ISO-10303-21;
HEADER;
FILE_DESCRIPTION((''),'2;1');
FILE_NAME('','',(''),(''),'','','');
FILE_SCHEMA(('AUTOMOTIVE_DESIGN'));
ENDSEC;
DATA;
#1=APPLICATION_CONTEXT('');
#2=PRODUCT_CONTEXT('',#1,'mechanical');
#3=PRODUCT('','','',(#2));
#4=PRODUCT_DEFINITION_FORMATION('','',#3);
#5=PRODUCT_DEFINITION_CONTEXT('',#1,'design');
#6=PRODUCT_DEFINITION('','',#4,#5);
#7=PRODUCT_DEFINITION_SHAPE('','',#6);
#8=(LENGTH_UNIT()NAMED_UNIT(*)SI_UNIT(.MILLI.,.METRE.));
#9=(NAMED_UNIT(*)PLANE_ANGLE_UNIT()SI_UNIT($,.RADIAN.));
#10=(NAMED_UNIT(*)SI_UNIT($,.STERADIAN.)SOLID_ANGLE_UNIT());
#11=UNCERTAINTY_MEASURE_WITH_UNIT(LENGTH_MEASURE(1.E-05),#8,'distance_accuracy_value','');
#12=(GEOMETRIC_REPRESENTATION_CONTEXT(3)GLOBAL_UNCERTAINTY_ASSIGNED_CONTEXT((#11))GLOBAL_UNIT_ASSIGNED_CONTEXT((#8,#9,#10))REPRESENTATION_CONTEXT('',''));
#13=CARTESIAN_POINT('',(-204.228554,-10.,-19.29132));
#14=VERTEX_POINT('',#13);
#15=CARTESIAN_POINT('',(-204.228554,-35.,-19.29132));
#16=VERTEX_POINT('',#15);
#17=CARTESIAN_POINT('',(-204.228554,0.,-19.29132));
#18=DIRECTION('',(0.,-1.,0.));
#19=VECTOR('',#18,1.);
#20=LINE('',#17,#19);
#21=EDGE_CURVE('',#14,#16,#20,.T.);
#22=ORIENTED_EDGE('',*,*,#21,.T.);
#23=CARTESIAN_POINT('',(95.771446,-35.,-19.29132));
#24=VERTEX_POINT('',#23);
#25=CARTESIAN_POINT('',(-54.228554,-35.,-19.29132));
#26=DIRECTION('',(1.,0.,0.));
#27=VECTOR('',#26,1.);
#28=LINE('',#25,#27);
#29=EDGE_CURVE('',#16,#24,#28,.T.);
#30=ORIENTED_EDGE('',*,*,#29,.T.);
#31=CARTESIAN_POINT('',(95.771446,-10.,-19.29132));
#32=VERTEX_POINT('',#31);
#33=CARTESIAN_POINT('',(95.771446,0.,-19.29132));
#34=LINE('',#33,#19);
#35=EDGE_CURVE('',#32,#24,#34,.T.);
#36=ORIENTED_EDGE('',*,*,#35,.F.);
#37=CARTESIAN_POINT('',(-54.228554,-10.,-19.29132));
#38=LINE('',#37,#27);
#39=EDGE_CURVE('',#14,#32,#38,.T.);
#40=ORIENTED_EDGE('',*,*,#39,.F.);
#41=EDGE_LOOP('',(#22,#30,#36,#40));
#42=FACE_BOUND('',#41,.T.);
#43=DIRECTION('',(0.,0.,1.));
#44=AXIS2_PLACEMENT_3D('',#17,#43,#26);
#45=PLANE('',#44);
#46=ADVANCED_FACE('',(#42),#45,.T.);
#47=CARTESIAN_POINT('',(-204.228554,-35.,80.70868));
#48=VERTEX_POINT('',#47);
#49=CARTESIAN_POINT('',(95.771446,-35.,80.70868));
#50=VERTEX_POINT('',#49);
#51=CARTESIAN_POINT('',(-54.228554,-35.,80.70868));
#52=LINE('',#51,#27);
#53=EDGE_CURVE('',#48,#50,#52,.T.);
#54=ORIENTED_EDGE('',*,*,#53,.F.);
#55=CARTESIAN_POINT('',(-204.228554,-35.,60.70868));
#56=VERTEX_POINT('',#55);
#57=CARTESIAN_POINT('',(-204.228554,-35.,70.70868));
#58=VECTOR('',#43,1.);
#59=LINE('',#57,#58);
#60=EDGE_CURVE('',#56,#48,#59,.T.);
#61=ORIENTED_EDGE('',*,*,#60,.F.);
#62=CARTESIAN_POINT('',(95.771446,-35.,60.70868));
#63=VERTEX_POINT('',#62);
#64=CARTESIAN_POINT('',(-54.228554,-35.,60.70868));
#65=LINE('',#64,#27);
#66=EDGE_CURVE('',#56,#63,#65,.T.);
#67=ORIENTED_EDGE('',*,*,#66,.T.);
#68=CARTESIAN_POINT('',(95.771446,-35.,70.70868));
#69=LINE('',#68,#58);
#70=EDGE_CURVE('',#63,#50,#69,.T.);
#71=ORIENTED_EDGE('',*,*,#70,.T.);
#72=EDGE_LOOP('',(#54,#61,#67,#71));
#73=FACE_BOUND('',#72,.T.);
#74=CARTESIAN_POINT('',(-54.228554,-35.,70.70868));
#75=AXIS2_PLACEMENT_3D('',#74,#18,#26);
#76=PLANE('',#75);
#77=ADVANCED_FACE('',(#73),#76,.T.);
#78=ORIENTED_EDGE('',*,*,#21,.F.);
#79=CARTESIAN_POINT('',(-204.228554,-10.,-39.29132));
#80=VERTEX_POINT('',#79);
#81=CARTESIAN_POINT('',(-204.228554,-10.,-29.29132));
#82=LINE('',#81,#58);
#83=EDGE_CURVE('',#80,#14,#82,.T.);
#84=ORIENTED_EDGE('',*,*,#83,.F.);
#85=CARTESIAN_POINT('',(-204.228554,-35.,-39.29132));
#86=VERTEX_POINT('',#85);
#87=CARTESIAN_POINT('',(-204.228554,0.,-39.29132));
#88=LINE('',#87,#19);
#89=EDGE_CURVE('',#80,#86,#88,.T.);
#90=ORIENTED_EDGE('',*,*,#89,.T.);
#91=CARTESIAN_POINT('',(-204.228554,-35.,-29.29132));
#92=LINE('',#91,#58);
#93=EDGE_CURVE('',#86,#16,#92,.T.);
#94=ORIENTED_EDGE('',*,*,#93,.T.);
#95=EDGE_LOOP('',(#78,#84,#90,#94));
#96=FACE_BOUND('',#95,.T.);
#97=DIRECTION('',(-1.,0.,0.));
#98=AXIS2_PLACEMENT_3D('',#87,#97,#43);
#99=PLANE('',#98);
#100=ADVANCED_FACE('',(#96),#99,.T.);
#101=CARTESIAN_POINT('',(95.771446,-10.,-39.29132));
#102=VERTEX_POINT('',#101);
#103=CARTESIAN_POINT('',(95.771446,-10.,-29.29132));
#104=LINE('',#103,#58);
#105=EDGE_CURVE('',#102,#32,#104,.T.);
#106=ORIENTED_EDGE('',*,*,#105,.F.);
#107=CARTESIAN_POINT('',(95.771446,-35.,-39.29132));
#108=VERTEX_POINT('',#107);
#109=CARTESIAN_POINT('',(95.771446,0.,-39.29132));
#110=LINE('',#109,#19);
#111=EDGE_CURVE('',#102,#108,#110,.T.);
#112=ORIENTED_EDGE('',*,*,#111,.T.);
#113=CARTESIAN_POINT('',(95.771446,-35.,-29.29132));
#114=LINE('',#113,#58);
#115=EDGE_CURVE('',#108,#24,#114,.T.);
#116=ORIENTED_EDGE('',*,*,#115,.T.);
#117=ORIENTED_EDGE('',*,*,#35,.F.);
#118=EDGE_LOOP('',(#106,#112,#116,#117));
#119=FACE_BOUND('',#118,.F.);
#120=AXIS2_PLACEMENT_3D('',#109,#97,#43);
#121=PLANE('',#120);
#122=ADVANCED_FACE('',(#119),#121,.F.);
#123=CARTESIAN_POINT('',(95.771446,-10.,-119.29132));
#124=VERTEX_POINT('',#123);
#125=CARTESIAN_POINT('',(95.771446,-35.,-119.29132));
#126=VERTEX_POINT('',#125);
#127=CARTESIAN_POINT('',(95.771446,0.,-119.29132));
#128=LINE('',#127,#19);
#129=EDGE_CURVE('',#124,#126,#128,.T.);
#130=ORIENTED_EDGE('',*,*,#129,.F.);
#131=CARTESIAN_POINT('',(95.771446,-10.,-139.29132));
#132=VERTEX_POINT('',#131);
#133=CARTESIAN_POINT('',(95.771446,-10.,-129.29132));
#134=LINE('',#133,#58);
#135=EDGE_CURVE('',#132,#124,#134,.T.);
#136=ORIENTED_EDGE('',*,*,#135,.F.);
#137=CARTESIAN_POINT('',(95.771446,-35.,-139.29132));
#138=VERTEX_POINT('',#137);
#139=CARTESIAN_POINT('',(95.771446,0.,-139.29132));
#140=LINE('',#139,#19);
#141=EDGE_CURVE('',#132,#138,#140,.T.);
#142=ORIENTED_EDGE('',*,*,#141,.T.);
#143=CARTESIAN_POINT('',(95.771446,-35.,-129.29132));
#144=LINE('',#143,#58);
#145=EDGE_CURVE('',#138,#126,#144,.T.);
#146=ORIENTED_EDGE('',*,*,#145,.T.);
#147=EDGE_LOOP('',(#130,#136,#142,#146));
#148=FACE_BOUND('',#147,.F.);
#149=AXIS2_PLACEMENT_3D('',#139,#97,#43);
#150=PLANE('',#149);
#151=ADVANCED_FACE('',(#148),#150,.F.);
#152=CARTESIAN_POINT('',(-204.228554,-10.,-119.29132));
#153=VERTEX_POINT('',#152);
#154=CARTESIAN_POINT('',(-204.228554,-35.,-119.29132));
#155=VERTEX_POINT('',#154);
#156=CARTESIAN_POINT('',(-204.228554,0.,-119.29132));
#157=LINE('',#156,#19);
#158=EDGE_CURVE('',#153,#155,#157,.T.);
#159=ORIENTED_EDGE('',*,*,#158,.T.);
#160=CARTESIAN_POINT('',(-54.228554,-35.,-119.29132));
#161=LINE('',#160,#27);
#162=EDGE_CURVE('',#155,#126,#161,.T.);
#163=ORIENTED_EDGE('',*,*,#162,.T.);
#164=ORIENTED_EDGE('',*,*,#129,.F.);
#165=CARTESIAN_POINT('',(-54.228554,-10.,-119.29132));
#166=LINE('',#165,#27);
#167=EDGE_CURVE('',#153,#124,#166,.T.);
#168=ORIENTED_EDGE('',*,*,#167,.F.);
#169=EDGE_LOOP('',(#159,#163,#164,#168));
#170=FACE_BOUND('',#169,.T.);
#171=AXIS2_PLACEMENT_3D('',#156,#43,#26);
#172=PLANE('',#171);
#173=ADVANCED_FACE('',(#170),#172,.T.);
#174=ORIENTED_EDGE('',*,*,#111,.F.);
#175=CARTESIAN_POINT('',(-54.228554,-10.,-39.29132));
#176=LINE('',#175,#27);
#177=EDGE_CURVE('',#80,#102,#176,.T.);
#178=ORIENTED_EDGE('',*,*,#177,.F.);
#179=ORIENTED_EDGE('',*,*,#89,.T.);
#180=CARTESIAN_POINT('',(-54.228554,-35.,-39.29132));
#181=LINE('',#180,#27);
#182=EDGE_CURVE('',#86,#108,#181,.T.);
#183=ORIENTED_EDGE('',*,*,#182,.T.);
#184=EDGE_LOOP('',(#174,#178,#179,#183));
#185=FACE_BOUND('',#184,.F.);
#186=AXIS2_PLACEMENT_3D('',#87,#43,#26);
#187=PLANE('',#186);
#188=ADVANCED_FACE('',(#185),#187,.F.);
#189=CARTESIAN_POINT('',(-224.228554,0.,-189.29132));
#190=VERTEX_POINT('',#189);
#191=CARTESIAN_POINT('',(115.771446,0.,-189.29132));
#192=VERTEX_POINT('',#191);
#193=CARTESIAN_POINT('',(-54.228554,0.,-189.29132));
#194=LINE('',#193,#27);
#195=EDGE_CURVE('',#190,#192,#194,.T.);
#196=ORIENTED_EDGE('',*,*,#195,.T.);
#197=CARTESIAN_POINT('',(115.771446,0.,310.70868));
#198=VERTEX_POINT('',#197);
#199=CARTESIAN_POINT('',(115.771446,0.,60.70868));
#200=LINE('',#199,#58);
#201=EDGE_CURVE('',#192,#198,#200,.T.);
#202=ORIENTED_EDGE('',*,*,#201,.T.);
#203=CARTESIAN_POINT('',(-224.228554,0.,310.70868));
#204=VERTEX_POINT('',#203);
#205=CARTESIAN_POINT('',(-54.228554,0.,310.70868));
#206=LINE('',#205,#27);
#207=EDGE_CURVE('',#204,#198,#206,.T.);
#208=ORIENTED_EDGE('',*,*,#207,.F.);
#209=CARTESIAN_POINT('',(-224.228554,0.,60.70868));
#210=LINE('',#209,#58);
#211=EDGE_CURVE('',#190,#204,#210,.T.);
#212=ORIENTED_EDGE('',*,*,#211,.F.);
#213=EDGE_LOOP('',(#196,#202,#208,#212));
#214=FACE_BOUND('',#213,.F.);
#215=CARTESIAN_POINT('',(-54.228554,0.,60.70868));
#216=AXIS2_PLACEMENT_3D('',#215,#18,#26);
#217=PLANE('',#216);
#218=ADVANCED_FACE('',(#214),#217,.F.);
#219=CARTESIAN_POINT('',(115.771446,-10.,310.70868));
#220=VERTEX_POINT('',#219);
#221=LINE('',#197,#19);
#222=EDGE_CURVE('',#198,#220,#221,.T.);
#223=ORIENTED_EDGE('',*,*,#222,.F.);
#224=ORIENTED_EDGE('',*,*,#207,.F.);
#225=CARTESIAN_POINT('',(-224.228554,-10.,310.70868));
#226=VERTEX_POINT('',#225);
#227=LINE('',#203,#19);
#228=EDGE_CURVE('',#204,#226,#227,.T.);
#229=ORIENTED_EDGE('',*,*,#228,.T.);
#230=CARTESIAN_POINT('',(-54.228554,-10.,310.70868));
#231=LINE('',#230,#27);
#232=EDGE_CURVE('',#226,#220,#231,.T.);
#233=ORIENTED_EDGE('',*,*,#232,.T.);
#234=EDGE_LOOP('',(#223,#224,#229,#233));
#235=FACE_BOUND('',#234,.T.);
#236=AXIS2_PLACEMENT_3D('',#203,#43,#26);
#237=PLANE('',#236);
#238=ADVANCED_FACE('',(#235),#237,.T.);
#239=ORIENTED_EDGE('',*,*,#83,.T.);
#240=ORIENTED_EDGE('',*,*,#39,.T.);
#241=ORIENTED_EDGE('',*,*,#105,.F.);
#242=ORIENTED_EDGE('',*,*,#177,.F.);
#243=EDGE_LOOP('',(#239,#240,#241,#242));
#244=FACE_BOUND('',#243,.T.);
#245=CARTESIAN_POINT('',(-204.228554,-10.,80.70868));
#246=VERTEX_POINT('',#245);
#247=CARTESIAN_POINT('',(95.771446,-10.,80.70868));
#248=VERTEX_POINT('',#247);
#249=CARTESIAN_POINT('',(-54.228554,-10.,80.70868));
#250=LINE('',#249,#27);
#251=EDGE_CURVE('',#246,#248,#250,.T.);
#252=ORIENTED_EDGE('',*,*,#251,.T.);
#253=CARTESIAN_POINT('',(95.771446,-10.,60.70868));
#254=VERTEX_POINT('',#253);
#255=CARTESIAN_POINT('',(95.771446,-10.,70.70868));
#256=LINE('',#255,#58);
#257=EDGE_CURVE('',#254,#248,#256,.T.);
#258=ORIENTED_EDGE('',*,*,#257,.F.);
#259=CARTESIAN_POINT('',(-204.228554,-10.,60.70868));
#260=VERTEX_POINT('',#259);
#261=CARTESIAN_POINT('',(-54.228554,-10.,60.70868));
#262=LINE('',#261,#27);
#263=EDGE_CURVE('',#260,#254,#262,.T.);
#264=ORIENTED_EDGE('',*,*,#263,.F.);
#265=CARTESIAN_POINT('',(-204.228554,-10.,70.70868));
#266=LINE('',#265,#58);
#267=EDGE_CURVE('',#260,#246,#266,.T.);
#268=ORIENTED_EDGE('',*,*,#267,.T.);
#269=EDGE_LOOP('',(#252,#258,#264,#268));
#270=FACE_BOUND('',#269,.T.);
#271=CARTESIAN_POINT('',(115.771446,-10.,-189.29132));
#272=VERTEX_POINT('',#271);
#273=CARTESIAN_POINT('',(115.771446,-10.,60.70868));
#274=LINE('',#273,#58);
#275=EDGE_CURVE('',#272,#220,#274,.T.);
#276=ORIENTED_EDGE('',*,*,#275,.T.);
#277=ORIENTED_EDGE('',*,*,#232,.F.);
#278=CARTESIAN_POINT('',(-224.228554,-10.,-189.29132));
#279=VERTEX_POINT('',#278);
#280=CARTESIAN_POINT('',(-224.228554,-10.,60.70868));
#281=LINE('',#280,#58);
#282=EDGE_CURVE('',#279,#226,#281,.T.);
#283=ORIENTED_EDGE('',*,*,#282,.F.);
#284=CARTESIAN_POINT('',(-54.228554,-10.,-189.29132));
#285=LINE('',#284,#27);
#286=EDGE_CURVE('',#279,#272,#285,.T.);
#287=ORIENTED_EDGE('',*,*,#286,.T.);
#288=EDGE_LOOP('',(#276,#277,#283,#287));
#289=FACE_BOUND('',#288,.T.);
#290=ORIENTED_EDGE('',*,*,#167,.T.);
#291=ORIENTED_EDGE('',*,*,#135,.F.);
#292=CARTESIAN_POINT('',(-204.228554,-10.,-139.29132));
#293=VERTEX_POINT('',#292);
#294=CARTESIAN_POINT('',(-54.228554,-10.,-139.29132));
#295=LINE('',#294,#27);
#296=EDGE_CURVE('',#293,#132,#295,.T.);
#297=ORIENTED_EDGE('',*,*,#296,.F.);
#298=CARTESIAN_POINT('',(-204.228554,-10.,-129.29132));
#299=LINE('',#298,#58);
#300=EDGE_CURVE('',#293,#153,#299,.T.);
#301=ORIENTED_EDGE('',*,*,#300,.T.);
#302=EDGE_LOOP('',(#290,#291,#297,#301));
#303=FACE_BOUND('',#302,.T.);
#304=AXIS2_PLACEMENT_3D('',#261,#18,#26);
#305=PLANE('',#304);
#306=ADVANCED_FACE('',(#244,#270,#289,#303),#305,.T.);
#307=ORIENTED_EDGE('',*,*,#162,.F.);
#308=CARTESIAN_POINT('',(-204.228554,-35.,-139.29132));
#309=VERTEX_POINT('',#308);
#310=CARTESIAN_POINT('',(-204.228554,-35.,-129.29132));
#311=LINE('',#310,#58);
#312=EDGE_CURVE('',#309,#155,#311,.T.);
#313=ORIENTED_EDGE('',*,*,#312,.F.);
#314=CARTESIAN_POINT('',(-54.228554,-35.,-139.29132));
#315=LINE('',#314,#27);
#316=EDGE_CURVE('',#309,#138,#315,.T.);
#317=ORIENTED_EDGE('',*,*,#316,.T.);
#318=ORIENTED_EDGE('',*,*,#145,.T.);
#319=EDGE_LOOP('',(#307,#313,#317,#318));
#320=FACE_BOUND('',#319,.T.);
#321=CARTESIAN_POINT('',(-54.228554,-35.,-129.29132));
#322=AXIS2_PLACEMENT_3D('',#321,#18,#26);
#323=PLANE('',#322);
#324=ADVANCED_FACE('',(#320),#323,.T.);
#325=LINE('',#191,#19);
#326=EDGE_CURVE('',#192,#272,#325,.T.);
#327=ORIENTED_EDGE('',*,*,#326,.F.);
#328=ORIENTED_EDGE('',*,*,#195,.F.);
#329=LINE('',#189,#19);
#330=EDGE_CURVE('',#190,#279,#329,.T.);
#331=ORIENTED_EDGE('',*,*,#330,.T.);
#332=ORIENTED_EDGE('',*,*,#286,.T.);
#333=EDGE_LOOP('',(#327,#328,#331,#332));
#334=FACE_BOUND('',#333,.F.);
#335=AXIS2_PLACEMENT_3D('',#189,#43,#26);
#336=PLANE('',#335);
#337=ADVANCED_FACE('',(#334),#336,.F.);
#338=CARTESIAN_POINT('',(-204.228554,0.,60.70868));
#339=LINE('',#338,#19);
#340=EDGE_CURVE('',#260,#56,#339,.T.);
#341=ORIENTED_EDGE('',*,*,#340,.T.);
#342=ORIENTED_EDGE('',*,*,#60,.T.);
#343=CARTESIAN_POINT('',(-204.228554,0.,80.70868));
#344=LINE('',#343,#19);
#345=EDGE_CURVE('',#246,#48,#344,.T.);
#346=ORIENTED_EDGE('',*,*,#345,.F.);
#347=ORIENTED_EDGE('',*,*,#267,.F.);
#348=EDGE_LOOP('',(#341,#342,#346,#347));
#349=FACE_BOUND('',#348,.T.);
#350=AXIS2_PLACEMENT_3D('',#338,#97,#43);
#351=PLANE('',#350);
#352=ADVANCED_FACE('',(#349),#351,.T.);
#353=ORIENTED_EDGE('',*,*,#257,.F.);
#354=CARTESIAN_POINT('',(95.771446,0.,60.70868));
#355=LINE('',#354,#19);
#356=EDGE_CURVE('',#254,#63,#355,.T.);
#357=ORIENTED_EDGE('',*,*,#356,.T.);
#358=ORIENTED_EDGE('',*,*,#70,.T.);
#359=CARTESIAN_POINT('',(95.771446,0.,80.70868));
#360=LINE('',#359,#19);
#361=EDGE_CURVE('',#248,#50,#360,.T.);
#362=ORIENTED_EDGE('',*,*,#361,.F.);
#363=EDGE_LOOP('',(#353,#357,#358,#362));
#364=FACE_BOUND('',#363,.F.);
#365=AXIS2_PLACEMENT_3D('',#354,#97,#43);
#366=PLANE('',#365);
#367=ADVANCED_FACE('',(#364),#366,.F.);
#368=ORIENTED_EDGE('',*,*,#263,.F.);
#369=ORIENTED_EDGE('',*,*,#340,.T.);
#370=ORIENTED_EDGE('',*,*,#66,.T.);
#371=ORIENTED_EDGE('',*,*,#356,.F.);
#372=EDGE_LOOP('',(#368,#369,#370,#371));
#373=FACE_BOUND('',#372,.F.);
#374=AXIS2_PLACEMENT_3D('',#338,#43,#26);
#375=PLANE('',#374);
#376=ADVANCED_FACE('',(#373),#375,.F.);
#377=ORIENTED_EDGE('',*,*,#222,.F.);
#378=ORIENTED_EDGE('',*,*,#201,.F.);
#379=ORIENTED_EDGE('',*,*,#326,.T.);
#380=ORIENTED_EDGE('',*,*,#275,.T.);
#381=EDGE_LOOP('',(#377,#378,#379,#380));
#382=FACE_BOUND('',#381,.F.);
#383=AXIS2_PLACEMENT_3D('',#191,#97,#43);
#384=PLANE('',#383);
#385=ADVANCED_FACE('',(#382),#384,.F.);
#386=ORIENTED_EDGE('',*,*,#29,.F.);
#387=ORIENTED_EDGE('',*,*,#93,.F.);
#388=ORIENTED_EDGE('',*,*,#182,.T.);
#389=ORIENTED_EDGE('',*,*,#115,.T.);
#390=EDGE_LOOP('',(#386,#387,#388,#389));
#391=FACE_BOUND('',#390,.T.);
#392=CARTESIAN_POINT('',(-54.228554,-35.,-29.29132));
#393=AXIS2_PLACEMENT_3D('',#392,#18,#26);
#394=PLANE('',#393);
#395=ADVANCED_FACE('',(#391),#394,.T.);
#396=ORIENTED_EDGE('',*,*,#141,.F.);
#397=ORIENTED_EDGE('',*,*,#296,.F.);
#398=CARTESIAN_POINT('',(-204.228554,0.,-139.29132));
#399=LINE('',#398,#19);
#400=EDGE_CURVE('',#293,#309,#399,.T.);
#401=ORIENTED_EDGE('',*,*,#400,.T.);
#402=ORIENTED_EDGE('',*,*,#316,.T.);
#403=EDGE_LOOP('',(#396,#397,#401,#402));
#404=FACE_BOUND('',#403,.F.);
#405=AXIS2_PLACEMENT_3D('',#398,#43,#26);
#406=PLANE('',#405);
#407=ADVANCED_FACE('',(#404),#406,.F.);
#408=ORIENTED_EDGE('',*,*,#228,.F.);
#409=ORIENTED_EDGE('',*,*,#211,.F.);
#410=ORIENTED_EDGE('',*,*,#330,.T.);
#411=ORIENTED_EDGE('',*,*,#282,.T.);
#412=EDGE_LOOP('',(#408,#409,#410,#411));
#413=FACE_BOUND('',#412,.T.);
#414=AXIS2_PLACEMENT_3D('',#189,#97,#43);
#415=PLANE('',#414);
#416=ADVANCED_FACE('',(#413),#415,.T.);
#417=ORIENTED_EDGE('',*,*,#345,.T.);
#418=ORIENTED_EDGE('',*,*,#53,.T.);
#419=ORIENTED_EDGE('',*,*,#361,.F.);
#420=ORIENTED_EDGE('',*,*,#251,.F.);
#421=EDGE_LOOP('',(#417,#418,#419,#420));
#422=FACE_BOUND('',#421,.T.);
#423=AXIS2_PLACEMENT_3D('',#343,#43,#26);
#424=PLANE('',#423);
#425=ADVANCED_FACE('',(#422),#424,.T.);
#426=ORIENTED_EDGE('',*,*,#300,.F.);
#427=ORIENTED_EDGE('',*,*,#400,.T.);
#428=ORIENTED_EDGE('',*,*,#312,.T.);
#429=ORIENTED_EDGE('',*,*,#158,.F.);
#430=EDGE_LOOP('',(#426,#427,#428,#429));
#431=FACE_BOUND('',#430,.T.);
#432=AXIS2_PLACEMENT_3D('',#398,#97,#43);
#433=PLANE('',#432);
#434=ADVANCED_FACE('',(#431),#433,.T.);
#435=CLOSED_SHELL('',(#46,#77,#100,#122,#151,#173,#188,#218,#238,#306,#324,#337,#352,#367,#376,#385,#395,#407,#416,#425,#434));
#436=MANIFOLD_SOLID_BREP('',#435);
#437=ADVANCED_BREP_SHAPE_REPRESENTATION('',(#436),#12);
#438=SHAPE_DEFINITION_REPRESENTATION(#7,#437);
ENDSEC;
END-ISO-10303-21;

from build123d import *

# Parameters (mm, degrees)
F0_W     = 340
F0_H     = 500
F0_W_2   = 300
F0_H_2   = 20
F1_DEPTH = 10
F2_DEPTH = 35


# Not quite as in the source:
# - a feature names something its author has since deleted; it is built from what else it names


with BuildPart() as f1:
    # F0 (on Front) → F1 (new body)
    with BuildSketch(Plane.XZ):
        with Locations((-54.2285538465, 60.7086803179)):
            Rectangle(F0_W, F0_H)
        with Locations((-54.2285538465, -129.2913196821)):
            Rectangle(F0_W_2, F0_H_2, mode=Mode.SUBTRACT)
        with Locations((-54.2285538465, -29.2913196821)):
            Rectangle(F0_W_2, F0_H_2, mode=Mode.SUBTRACT)
        with Locations((-54.2285538465, 70.7086803179)):
            Rectangle(F0_W_2, F0_H_2, mode=Mode.SUBTRACT)
    extrude(amount=F1_DEPTH)

    # F0 (on Front) → F2 (join)
    with BuildSketch(Plane.XZ):
        with Locations((-54.2285538465, 70.7086803179)):
            Rectangle(F0_W_2, F0_H_2)
        with Locations((-54.2285538465, -29.2913196821)):
            Rectangle(F0_W_2, F0_H_2)
        with Locations((-54.2285538465, -129.2913196821)):
            Rectangle(F0_W_2, F0_H_2)
    extrude(amount=F2_DEPTH)


solid = f1.part
